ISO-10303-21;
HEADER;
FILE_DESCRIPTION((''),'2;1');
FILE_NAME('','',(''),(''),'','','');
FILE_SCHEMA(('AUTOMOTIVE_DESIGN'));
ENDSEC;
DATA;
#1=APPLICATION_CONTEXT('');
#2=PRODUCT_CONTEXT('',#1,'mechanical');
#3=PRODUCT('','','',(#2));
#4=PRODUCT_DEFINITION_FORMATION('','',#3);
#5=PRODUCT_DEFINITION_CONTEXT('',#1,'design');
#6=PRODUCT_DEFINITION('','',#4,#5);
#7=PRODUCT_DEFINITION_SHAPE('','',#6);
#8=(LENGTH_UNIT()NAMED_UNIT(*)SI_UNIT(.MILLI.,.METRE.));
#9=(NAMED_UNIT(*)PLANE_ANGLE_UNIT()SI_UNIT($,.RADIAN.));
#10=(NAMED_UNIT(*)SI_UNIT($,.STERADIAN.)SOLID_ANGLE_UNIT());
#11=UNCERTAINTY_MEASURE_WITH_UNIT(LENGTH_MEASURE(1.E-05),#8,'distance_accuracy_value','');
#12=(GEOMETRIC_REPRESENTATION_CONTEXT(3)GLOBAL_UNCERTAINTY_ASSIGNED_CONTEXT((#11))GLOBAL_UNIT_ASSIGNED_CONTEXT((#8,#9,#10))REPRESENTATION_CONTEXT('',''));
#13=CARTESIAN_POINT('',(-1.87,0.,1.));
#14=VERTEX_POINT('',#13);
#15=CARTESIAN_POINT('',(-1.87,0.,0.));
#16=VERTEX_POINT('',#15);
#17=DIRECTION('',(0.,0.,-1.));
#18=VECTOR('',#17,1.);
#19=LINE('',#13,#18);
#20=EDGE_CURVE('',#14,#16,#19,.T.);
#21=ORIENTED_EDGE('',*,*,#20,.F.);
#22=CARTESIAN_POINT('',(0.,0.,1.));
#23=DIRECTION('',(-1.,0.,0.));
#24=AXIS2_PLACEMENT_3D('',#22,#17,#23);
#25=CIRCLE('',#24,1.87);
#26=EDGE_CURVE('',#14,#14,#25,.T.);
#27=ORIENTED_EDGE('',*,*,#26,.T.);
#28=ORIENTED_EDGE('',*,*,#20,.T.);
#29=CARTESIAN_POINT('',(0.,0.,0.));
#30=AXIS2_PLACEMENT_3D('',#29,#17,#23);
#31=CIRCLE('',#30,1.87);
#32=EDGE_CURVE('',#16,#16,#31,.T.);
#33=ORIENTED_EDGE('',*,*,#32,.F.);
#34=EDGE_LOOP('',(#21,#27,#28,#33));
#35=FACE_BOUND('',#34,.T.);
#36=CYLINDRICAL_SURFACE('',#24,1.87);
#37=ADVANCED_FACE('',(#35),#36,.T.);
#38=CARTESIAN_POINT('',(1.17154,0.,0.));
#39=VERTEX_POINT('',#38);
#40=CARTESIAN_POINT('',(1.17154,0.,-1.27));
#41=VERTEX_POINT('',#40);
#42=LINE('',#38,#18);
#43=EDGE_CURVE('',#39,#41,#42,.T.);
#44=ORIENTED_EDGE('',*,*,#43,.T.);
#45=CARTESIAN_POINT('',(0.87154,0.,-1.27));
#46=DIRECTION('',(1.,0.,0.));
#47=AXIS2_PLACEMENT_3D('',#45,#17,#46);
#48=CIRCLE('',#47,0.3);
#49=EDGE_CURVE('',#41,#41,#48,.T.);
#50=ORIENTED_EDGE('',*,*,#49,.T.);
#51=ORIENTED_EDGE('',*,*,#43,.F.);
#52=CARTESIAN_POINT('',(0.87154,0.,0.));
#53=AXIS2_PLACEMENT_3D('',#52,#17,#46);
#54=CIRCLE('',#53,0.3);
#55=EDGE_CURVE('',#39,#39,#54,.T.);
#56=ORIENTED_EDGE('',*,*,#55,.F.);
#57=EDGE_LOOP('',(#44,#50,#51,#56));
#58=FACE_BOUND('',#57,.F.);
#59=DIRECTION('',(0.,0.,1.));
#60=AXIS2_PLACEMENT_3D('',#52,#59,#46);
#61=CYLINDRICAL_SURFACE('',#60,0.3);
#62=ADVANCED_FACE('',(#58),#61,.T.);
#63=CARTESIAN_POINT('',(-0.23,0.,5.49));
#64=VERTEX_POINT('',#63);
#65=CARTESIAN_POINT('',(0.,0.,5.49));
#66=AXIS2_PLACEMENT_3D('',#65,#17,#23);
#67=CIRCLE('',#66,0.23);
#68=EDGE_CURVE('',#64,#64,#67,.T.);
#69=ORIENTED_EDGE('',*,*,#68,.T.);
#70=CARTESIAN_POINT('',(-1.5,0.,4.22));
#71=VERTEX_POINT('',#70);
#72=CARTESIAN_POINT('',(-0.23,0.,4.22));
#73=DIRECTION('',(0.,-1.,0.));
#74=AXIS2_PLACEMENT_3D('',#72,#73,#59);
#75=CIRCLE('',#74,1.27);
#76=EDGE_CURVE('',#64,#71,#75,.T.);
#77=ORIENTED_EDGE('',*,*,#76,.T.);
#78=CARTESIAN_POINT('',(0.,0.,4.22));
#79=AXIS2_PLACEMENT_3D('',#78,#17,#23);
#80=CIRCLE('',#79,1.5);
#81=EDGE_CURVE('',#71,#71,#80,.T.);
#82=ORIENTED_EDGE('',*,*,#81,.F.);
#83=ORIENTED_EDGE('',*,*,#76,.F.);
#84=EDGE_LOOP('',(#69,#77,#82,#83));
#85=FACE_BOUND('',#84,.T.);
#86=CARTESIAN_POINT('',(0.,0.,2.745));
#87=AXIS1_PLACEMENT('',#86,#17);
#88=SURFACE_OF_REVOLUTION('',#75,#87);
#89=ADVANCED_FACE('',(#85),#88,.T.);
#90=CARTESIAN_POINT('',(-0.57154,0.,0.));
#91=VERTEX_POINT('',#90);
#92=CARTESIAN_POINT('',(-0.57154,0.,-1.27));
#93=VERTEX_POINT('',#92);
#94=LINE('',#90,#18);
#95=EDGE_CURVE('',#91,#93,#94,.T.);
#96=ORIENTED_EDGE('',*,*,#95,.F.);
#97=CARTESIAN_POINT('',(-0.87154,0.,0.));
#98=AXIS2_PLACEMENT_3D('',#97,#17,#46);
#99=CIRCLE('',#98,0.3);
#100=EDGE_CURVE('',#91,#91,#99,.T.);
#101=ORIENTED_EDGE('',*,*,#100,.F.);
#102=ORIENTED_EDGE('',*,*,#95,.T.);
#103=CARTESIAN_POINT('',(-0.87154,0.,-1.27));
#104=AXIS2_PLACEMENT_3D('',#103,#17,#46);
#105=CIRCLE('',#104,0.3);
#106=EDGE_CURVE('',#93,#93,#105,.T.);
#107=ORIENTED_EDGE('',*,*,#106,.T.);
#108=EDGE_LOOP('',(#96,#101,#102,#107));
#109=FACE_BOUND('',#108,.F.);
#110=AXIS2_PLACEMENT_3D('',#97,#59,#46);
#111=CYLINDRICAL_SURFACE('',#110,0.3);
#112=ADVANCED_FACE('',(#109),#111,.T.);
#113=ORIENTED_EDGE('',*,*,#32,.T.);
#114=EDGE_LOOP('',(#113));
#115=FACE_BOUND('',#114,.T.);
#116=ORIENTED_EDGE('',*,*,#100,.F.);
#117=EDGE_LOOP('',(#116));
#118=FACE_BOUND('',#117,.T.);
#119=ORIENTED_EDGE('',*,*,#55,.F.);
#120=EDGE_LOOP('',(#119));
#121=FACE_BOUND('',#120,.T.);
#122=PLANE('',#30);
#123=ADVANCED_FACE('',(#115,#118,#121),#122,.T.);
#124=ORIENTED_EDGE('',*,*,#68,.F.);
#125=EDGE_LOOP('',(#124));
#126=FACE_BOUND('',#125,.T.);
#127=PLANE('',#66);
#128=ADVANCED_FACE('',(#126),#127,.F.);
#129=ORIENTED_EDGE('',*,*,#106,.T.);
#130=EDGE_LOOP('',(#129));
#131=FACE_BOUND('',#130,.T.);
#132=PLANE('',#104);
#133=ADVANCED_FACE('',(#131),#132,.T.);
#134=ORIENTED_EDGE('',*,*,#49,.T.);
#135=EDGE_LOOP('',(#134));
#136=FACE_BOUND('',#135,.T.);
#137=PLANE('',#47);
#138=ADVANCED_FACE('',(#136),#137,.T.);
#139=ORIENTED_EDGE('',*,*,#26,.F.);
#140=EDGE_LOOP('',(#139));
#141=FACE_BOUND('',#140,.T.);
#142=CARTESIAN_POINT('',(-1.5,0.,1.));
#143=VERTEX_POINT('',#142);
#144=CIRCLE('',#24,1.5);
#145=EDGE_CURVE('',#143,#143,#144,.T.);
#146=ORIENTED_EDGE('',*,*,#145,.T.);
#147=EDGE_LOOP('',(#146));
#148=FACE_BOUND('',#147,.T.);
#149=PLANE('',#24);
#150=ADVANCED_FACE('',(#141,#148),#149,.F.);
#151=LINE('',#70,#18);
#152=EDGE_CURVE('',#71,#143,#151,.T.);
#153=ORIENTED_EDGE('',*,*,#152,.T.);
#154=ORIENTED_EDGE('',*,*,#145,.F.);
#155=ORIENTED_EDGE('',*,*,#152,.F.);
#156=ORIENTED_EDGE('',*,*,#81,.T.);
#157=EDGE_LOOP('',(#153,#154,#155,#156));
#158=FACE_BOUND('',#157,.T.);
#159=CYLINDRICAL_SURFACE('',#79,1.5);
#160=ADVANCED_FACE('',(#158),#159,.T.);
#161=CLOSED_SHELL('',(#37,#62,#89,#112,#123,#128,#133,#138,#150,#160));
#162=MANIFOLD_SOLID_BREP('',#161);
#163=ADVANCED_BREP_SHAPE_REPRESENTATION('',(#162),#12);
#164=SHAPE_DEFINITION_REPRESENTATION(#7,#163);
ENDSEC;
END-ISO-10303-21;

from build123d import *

# Parameters (mm, degrees)
F2_R     = 0.3
F3_DEPTH = 1.27


# Not quite as in the source:
# - a feature names something its author has since deleted; it is built from what else it names


with BuildPart() as f1:
    # F0 (on Front) → F1 (revolve)
    with BuildSketch(Plane.XZ):
        with BuildLine():
            Line((-1.87, 0), (0, 0))
            Line((0, 0), (0, 5.49))
            Line((0, 5.49), (-0.23, 5.49))
            ThreePointArc((-0.23, 5.49), (-1.1280256121, 5.1180256121), (-1.5, 4.22))
            Line((-1.5, 4.22), (-1.5, 1))
            Line((-1.5, 1), (-1.87, 1))
            Line((-1.87, 1), (-1.87, 0))
        make_face()
    revolve(axis=Axis((0, 0, 2.745), (0, 0, -1)))

    # F2 (on face) → F3 (join)
    with BuildSketch(Plane(origin=(0, 0, 0), x_dir=(1, 0, 0), z_dir=(0, 0, -1))):
        with Locations((-0.8715403965, 0)):
            Circle(F2_R)
        with Locations((0.8715403965, 0)):
            Circle(F2_R)
    extrude(amount=F3_DEPTH)


solid = f1.part
